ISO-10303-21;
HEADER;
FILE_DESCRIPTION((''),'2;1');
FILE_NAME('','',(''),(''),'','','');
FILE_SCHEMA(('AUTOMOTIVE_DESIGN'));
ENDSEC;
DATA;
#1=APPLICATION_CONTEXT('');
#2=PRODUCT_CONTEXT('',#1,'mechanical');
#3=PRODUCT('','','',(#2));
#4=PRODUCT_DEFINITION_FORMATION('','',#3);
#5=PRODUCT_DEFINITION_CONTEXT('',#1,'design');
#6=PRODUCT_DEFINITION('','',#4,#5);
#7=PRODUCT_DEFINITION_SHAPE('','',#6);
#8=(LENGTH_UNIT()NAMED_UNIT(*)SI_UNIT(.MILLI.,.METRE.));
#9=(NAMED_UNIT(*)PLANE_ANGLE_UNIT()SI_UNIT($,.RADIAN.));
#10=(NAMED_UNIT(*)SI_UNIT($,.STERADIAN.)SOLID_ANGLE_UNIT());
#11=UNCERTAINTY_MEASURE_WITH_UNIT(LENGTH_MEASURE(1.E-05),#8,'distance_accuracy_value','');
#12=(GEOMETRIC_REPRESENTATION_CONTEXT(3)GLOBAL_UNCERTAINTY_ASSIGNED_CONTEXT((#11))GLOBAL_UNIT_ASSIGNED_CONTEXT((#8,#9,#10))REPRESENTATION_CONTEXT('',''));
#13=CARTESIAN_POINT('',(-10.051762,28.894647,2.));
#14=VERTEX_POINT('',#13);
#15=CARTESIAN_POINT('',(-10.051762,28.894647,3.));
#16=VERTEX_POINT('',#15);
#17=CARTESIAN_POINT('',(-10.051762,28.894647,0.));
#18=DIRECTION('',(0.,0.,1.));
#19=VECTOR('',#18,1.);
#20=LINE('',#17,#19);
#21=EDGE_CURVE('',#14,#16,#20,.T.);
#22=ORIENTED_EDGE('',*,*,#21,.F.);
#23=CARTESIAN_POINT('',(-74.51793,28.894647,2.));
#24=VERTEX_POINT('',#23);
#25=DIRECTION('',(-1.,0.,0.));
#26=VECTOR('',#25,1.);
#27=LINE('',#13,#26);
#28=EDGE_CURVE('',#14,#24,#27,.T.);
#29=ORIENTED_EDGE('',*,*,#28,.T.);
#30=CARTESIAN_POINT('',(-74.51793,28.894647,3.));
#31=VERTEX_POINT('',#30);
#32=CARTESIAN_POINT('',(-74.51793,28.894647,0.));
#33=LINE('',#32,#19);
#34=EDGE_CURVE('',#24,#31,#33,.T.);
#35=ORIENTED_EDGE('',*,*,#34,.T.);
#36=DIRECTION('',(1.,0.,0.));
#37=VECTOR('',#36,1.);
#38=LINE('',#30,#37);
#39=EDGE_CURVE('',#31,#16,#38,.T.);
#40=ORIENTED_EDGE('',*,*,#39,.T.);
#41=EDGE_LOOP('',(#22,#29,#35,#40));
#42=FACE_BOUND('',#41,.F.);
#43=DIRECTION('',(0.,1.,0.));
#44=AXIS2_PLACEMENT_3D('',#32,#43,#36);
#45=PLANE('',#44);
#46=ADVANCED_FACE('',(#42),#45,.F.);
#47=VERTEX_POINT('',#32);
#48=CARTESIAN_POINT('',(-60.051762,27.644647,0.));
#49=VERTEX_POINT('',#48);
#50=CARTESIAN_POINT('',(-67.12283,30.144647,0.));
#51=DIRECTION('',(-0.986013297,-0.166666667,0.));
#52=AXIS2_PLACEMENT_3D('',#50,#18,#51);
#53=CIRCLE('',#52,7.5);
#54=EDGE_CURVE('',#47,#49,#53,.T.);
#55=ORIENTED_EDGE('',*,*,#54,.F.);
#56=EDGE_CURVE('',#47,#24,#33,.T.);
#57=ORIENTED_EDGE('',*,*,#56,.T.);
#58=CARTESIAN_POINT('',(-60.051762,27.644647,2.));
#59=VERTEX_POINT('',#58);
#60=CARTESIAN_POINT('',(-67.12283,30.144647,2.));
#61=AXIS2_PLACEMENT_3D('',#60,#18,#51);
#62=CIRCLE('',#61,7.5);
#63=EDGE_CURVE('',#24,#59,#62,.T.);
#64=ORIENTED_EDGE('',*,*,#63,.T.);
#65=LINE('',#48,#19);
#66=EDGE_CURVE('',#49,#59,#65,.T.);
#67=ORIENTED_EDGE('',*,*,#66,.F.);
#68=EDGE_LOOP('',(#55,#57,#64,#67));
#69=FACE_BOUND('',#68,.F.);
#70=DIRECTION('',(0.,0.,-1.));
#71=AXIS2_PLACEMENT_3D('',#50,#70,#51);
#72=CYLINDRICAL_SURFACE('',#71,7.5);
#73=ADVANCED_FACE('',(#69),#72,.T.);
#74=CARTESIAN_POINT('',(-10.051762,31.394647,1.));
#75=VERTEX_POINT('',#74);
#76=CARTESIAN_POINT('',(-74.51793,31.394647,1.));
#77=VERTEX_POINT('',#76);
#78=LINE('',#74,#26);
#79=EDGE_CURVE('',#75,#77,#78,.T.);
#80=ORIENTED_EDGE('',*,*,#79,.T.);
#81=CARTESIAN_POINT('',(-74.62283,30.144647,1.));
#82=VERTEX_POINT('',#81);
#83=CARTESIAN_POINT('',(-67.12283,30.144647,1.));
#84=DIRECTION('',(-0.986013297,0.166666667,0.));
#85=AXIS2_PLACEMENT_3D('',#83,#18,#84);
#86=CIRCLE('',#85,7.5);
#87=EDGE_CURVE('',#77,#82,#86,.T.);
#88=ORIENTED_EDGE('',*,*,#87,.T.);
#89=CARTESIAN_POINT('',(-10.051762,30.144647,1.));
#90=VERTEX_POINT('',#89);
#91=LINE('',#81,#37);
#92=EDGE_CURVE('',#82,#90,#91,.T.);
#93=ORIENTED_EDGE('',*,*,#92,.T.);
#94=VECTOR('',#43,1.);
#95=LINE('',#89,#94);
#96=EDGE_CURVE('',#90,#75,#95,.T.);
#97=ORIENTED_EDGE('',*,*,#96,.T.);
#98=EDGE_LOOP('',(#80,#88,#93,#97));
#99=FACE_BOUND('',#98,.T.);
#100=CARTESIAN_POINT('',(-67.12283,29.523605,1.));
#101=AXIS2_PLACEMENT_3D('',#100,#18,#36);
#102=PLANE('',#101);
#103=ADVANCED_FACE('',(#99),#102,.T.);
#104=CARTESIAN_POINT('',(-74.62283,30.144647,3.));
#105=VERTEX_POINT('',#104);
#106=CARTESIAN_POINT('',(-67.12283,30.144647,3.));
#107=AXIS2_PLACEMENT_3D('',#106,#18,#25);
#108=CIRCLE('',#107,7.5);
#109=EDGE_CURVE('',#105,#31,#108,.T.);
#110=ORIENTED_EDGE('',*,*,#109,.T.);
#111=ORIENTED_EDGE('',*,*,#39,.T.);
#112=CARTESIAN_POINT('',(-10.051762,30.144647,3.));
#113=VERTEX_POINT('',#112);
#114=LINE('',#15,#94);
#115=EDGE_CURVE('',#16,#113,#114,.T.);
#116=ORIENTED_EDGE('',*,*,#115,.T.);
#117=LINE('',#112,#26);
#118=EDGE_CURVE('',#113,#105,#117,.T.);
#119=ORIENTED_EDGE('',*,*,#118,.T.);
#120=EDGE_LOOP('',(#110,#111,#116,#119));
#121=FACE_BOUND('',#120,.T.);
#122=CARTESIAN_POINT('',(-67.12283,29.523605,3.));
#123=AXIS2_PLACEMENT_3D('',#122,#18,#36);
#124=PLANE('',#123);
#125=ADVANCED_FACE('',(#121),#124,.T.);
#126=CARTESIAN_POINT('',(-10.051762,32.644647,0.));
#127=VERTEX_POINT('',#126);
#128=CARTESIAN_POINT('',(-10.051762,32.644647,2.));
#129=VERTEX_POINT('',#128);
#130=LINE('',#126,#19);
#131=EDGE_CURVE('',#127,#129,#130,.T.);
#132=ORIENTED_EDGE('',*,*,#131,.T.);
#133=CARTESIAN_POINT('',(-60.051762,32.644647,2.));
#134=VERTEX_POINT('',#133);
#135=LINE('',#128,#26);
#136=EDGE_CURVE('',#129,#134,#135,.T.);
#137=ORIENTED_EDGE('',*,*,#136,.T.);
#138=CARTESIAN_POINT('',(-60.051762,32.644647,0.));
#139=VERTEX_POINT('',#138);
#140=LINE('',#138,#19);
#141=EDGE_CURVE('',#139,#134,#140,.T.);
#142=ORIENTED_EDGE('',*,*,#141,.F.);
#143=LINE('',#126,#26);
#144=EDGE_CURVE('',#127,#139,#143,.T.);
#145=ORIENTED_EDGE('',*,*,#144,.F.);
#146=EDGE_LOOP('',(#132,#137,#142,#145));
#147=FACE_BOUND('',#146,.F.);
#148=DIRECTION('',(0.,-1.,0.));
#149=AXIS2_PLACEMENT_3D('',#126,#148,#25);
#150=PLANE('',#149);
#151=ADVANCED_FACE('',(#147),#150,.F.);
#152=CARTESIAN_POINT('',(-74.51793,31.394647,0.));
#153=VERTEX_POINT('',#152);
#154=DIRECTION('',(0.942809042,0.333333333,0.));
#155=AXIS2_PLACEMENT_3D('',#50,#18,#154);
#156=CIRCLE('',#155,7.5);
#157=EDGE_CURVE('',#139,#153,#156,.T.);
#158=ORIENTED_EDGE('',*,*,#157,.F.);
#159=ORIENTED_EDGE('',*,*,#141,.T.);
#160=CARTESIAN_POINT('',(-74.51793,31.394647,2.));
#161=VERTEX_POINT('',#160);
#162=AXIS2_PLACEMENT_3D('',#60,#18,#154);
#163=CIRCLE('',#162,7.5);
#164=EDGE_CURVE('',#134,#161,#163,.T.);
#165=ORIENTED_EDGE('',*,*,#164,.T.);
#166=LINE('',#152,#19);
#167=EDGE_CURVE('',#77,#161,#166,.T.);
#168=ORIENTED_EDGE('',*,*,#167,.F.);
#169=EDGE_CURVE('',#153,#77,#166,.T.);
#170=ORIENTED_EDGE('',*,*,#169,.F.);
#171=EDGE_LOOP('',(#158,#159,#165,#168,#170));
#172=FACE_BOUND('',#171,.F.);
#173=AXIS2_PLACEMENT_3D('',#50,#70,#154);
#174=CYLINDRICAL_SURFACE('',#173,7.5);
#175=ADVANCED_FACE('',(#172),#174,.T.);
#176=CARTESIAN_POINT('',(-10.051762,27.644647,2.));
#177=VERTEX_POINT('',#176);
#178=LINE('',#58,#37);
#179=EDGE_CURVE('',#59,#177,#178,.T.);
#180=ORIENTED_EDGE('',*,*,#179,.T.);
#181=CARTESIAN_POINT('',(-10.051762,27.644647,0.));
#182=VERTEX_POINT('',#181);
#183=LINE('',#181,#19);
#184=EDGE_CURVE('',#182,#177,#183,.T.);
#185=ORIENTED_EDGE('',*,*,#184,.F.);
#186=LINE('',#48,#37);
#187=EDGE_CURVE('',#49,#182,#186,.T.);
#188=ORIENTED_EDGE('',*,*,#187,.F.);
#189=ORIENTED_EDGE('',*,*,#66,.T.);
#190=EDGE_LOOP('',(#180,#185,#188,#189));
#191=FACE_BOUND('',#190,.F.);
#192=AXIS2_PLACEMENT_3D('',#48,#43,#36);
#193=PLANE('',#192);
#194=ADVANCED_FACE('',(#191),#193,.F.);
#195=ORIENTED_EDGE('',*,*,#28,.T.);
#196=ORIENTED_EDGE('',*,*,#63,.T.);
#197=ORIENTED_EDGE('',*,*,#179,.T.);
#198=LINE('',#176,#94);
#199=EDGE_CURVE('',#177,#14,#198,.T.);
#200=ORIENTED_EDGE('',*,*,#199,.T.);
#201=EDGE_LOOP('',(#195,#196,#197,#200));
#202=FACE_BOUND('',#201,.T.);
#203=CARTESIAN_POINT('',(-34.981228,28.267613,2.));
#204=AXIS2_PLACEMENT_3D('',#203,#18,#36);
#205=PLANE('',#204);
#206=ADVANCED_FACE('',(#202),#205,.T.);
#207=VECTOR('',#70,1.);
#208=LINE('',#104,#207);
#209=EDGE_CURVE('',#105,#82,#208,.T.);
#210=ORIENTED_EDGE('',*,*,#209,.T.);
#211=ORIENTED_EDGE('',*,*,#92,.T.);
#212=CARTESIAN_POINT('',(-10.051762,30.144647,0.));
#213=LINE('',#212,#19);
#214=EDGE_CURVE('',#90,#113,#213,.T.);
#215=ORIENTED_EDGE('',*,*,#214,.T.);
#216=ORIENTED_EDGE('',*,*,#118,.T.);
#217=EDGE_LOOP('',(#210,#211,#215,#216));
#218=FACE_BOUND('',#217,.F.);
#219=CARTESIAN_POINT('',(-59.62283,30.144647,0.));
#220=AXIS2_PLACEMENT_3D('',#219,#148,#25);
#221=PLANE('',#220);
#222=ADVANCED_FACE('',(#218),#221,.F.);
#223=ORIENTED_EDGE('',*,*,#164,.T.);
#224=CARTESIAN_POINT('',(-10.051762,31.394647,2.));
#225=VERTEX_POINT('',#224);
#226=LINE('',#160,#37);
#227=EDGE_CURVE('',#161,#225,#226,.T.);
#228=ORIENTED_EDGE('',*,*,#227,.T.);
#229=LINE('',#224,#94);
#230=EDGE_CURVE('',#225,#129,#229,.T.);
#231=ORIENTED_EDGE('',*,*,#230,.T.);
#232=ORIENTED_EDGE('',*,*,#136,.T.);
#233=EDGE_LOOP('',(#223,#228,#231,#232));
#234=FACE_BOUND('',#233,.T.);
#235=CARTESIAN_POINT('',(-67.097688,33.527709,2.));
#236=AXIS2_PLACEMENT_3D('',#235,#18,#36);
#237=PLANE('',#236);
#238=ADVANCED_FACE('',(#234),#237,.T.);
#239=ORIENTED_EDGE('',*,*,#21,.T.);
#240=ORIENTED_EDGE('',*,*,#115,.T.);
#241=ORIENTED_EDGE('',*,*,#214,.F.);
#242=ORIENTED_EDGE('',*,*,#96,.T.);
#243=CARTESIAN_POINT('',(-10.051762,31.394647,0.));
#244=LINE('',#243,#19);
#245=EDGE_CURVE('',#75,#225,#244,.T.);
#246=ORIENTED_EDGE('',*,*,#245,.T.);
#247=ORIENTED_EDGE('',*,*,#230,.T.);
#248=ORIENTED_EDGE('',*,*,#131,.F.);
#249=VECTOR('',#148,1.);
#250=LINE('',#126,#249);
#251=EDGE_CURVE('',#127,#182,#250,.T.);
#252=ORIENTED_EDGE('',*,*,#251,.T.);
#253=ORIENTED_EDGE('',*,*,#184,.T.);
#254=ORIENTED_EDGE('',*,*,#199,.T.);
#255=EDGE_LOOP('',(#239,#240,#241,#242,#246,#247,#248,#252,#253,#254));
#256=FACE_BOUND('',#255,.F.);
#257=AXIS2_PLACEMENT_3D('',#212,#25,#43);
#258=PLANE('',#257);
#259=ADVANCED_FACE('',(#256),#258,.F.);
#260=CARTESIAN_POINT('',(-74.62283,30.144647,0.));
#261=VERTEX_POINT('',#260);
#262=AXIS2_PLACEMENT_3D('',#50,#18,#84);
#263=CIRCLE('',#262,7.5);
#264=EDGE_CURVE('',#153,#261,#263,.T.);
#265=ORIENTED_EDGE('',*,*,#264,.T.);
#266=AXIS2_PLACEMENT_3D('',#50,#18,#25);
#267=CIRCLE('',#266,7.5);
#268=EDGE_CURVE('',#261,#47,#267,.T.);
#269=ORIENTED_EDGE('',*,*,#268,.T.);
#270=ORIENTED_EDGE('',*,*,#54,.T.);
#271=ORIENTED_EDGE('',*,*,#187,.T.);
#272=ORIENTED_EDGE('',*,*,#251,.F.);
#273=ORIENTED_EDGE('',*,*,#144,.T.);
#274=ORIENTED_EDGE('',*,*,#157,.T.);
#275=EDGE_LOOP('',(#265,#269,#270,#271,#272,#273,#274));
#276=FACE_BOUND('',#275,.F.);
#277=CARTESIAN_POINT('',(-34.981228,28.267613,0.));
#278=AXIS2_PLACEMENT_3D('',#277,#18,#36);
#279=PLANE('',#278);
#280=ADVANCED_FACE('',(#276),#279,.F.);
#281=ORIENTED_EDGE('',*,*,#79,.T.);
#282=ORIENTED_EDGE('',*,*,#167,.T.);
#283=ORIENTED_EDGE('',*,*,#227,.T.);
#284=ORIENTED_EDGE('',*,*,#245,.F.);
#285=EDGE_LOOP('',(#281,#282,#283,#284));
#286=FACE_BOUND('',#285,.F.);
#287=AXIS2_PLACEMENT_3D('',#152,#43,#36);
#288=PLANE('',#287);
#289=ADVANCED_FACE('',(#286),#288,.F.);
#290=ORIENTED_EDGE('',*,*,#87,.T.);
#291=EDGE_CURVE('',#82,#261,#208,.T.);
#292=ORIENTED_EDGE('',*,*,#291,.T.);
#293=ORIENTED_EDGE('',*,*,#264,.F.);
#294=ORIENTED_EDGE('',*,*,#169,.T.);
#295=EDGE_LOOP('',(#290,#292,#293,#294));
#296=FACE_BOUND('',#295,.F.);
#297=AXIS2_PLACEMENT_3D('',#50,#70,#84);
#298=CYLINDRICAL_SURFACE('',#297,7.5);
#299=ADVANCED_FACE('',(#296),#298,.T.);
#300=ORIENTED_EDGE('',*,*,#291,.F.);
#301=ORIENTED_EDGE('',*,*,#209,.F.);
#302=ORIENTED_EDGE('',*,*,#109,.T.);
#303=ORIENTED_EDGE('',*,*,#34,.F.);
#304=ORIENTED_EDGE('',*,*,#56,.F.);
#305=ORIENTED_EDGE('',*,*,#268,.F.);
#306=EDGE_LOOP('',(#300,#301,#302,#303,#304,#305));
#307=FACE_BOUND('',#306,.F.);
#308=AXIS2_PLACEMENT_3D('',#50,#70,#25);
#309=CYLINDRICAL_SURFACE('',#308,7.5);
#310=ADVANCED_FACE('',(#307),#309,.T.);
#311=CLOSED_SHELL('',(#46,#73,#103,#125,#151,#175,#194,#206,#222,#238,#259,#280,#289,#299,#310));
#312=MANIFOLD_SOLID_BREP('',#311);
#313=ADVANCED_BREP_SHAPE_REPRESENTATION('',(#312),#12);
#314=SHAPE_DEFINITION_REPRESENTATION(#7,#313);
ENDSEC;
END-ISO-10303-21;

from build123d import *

# Parameters (mm, degrees)
F1_DEPTH = 2
F2_DEPTH = 3
F3_DEPTH = 1


with BuildPart() as f1:
    # F0 (on Top) → F1 (new body)
    with BuildSketch(Plane.XY):
        with BuildLine():
            ThreePointArc((-59.7277300679, 28.8946466617), (-59.8627935828, 28.2626599001), (-60.0517619849, 27.6446466617))
            Line((-60.0517619849, 27.6446466617), (-10.0517619849, 27.6446466617))
            Line((-10.0517619849, 27.6446466617), (-10.0517619849, 28.8946466617))
            Line((-10.0517619849, 28.8946466617), (-59.7277300679, 28.8946466617))
        make_face()
        with BuildLine():
            ThreePointArc((-74.5179295257, 28.8946466617), (-67.7684877332, 22.6724899563), (-60.0517619849, 27.6446466617))
            ThreePointArc((-60.0517619849, 27.6446466617), (-59.8627935828, 28.2626599001), (-59.7277300679, 28.8946466617))
            Line((-59.7277300679, 28.8946466617), (-74.5179295257, 28.8946466617))
        make_face()
        with BuildLine():
            ThreePointArc((-74.6228297968, 30.1446466617), (-74.5965587177, 29.5174497096), (-74.5179295257, 28.8946466617))
            Line((-74.5179295257, 28.8946466617), (-59.7277300679, 28.8946466617))
            ThreePointArc((-59.7277300679, 28.8946466617), (-59.6491008759, 29.5174497096), (-59.6228297968, 30.1446466617))
            Line((-59.6228297968, 30.1446466617), (-74.6228297968, 30.1446466617))
        make_face()
    extrude(amount=F1_DEPTH)

    # F0 (on Top) → F2 (join)
    with BuildSketch(Plane.XY):
        with BuildLine():
            ThreePointArc((-74.6228297968, 30.1446466617), (-74.5965587177, 29.5174497096), (-74.5179295257, 28.8946466617))
            Line((-74.5179295257, 28.8946466617), (-59.7277300679, 28.8946466617))
            ThreePointArc((-59.7277300679, 28.8946466617), (-59.6491008759, 29.5174497096), (-59.6228297968, 30.1446466617))
            Line((-59.6228297968, 30.1446466617), (-74.6228297968, 30.1446466617))
        make_face()
        with BuildLine():
            ThreePointArc((-59.6228297968, 30.1446466617), (-59.6491008759, 29.5174497096), (-59.7277300679, 28.8946466617))
            Line((-59.7277300679, 28.8946466617), (-10.0517619849, 28.8946466617))
            Line((-10.0517619849, 28.8946466617), (-10.0517619849, 30.1446466617))
            Line((-10.0517619849, 30.1446466617), (-59.6228297968, 30.1446466617))
        make_face()
    extrude(amount=F2_DEPTH)



with BuildPart() as f1b:
    # F0 (on Top) → F1, piece 2 (new body)
    with BuildSketch(Plane.XY):
        with BuildLine():
            ThreePointArc((-60.0517619849, 32.6446466617), (-67.7684877332, 37.616803367), (-74.5179295257, 31.3946466617))
            Line((-74.5179295257, 31.3946466617), (-59.7277300679, 31.3946466617))
            ThreePointArc((-59.7277300679, 31.3946466617), (-59.8627935828, 32.0266334232), (-60.0517619849, 32.6446466617))
        make_face()
        with BuildLine():
            ThreePointArc((-60.0517619849, 32.6446466617), (-59.8627935828, 32.0266334232), (-59.7277300679, 31.3946466617))
            Line((-59.7277300679, 31.3946466617), (-10.0517619849, 31.3946466617))
            Line((-10.0517619849, 31.3946466617), (-10.0517619849, 32.6446466617))
            Line((-10.0517619849, 32.6446466617), (-60.0517619849, 32.6446466617))
        make_face()
    extrude(amount=F1_DEPTH)


with BuildPart() as f1_1:
    add(f1.part)

    add(f1b.part)  # F3 merges F1b
    # F0 (on Top) → F3 (join)
    with BuildSketch(Plane.XY):
        with BuildLine():
            ThreePointArc((-74.6228297968, 30.1446466617), (-74.5965587177, 29.5174497096), (-74.5179295257, 28.8946466617))
            Line((-74.5179295257, 28.8946466617), (-59.7277300679, 28.8946466617))
            ThreePointArc((-59.7277300679, 28.8946466617), (-59.6491008759, 29.5174497096), (-59.6228297968, 30.1446466617))
            Line((-59.6228297968, 30.1446466617), (-74.6228297968, 30.1446466617))
        make_face()
        with BuildLine():
            ThreePointArc((-74.5179295257, 31.3946466617), (-74.5965587177, 30.7718436138), (-74.6228297968, 30.1446466617))
            Line((-74.6228297968, 30.1446466617), (-59.6228297968, 30.1446466617))
            ThreePointArc((-59.6228297968, 30.1446466617), (-59.6491008759, 30.7718436138), (-59.7277300679, 31.3946466617))
            Line((-59.7277300679, 31.3946466617), (-74.5179295257, 31.3946466617))
        make_face()
        with BuildLine():
            ThreePointArc((-59.7277300679, 31.3946466617), (-59.6491008759, 30.7718436138), (-59.6228297968, 30.1446466617))
            Line((-59.6228297968, 30.1446466617), (-10.0517619849, 30.1446466617))
            Line((-10.0517619849, 30.1446466617), (-10.0517619849, 31.3946466617))
            Line((-10.0517619849, 31.3946466617), (-59.7277300679, 31.3946466617))
        make_face()
    extrude(amount=F3_DEPTH)


solid = f1_1.part
